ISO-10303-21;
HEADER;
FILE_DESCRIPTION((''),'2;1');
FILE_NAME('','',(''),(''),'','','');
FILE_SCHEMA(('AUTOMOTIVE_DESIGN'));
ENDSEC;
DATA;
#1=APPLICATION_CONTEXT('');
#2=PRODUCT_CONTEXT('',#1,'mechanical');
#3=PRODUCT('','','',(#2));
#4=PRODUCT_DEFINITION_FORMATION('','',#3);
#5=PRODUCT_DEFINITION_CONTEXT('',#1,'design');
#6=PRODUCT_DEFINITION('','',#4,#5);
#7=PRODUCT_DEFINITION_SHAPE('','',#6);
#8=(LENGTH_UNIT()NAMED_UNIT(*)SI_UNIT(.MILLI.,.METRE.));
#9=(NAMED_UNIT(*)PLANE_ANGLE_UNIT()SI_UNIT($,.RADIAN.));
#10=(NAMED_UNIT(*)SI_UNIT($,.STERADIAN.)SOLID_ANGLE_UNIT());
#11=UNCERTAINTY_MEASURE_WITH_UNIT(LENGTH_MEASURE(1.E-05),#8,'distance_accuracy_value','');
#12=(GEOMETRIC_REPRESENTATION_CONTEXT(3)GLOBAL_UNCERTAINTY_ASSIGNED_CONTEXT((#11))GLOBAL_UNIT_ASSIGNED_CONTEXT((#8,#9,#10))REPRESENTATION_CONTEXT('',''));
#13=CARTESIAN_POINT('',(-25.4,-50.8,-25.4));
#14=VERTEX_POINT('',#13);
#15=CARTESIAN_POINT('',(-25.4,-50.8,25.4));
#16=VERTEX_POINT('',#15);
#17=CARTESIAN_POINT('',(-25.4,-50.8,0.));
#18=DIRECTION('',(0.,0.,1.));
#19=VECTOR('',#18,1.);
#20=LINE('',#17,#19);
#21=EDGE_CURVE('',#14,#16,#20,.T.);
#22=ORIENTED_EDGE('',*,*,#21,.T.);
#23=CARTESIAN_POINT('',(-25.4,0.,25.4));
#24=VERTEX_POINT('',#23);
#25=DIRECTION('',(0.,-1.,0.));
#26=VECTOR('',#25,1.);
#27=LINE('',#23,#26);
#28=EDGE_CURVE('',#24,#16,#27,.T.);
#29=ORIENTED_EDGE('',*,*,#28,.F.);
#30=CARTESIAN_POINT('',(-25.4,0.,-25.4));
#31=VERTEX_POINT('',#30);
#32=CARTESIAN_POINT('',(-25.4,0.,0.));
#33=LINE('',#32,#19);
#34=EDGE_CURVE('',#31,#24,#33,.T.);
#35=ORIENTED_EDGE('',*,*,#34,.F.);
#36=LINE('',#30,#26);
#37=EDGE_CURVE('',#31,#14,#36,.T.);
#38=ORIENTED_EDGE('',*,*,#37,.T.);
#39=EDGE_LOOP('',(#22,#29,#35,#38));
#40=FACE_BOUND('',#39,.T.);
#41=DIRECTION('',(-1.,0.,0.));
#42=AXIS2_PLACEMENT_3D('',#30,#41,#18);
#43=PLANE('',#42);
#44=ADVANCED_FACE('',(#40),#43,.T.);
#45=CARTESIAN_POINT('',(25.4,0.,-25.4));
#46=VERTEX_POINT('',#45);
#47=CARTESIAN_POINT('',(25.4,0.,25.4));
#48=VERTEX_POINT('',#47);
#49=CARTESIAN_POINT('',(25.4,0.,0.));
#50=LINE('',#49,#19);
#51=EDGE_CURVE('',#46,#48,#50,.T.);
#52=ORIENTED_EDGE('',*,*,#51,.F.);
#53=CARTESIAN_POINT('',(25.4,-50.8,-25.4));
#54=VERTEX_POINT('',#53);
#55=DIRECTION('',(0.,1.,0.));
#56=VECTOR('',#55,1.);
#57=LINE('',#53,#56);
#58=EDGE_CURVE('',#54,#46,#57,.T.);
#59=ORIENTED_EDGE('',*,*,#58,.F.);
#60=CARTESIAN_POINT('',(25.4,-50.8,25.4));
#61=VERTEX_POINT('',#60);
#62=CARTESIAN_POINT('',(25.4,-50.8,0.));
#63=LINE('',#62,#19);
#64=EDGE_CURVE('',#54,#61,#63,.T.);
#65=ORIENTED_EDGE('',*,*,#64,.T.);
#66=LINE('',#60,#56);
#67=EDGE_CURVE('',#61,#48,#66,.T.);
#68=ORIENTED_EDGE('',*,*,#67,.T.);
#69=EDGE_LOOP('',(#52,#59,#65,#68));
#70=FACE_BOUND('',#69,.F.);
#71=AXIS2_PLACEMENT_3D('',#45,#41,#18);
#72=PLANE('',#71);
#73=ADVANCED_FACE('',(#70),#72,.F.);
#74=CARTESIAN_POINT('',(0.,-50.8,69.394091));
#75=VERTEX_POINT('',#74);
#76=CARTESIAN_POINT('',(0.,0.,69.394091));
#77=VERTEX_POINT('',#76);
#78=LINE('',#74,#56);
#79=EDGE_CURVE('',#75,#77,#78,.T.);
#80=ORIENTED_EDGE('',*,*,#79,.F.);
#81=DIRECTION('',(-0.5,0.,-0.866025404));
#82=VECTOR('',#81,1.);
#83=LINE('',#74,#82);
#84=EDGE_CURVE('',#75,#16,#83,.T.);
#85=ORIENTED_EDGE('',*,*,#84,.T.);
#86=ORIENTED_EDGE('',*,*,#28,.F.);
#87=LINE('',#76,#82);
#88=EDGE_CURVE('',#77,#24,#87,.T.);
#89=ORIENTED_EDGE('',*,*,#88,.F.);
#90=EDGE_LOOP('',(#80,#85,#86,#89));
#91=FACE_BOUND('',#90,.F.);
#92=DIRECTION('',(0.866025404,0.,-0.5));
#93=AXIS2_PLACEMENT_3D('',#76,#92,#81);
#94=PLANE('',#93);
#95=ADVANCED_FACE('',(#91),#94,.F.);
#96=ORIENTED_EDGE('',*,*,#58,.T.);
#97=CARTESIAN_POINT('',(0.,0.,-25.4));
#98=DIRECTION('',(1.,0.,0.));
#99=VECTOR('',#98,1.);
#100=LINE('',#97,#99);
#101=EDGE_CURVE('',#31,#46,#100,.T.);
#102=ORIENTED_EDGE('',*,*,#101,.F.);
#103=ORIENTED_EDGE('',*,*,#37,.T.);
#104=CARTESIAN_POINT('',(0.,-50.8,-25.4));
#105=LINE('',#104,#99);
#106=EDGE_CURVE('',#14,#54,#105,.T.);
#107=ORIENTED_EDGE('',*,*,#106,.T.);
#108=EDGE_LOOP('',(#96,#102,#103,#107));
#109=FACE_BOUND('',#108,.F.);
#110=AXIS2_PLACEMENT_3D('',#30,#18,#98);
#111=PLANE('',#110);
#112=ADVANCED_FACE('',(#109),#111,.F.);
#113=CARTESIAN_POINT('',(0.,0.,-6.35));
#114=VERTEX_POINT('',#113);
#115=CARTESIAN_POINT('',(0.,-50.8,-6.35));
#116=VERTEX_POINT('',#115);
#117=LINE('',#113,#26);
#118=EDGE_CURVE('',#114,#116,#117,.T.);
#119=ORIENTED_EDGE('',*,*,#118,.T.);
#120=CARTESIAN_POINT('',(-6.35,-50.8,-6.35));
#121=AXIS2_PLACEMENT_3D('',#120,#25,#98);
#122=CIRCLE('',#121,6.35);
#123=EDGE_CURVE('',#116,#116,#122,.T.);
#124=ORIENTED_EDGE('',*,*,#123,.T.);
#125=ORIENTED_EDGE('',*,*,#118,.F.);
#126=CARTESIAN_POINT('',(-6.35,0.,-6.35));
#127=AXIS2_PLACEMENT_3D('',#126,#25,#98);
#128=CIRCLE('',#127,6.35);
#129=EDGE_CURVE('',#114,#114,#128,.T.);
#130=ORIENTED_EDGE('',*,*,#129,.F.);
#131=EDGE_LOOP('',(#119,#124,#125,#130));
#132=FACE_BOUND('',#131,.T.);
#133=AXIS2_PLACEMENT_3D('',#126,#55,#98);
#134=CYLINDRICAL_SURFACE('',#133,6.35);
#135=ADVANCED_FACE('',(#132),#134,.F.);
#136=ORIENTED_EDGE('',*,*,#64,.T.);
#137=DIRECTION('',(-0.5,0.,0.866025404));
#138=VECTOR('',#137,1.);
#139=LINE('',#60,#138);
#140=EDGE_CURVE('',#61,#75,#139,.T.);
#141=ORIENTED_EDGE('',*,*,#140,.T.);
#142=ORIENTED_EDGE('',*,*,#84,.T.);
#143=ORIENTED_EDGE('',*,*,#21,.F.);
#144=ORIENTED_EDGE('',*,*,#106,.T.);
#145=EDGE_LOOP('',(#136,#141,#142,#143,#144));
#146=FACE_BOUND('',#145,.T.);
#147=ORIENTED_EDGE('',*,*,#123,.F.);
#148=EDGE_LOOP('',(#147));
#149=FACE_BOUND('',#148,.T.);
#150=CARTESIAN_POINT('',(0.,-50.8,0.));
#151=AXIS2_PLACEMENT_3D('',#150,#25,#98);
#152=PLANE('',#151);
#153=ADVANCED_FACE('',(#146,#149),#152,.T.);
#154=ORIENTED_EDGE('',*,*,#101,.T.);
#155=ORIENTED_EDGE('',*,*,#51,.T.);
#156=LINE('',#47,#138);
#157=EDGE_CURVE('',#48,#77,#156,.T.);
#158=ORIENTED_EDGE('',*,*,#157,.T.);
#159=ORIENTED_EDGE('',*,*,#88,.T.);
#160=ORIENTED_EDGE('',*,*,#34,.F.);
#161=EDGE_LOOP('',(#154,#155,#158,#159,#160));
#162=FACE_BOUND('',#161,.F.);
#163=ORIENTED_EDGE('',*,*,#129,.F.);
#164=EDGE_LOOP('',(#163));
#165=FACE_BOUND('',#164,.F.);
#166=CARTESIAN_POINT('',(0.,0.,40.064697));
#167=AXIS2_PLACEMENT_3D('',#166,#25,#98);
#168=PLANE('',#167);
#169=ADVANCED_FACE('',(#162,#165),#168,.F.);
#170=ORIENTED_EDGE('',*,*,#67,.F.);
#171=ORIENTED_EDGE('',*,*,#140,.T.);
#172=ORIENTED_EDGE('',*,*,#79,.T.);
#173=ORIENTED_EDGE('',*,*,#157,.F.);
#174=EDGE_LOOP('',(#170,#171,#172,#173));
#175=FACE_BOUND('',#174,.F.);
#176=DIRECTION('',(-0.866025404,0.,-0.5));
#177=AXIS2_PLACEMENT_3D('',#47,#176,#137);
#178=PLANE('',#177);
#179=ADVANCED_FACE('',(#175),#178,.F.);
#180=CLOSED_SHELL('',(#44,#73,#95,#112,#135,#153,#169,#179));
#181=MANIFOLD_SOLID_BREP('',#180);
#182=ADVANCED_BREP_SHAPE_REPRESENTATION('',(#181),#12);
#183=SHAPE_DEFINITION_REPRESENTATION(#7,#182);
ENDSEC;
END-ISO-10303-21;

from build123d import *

# Parameters (mm, degrees)
F0_W     = 50.8
F0_H     = 50.8
F0_R     = 6.35
F1_DEPTH = 25.4
F2_DEPTH = 50.8


# Not quite as in the source:
# - a feature names something its author has since deleted; it is built from what else it names


with BuildPart() as f1:
    # F0 (on Front) → F1 (new body)
    with BuildSketch(Plane.XZ):
        Polygon((-25.4, 25.4), (25.4, 25.4), (0, 69.3940905122), align=None)
        Rectangle(F0_W, F0_H)
        with Locations((-6.35, -6.35)):
            Circle(F0_R, mode=Mode.SUBTRACT)
    extrude(amount=F1_DEPTH)

    # F0 (on Front) → F2 (join)
    with BuildSketch(Plane.XZ):
        Rectangle(F0_W, F0_H)
        with Locations((-6.35, -6.35)):
            Circle(F0_R, mode=Mode.SUBTRACT)
        Polygon((-25.4, 25.4), (25.4, 25.4), (0, 69.3940905122), align=None)
    extrude(amount=F2_DEPTH)


solid = f1.part
